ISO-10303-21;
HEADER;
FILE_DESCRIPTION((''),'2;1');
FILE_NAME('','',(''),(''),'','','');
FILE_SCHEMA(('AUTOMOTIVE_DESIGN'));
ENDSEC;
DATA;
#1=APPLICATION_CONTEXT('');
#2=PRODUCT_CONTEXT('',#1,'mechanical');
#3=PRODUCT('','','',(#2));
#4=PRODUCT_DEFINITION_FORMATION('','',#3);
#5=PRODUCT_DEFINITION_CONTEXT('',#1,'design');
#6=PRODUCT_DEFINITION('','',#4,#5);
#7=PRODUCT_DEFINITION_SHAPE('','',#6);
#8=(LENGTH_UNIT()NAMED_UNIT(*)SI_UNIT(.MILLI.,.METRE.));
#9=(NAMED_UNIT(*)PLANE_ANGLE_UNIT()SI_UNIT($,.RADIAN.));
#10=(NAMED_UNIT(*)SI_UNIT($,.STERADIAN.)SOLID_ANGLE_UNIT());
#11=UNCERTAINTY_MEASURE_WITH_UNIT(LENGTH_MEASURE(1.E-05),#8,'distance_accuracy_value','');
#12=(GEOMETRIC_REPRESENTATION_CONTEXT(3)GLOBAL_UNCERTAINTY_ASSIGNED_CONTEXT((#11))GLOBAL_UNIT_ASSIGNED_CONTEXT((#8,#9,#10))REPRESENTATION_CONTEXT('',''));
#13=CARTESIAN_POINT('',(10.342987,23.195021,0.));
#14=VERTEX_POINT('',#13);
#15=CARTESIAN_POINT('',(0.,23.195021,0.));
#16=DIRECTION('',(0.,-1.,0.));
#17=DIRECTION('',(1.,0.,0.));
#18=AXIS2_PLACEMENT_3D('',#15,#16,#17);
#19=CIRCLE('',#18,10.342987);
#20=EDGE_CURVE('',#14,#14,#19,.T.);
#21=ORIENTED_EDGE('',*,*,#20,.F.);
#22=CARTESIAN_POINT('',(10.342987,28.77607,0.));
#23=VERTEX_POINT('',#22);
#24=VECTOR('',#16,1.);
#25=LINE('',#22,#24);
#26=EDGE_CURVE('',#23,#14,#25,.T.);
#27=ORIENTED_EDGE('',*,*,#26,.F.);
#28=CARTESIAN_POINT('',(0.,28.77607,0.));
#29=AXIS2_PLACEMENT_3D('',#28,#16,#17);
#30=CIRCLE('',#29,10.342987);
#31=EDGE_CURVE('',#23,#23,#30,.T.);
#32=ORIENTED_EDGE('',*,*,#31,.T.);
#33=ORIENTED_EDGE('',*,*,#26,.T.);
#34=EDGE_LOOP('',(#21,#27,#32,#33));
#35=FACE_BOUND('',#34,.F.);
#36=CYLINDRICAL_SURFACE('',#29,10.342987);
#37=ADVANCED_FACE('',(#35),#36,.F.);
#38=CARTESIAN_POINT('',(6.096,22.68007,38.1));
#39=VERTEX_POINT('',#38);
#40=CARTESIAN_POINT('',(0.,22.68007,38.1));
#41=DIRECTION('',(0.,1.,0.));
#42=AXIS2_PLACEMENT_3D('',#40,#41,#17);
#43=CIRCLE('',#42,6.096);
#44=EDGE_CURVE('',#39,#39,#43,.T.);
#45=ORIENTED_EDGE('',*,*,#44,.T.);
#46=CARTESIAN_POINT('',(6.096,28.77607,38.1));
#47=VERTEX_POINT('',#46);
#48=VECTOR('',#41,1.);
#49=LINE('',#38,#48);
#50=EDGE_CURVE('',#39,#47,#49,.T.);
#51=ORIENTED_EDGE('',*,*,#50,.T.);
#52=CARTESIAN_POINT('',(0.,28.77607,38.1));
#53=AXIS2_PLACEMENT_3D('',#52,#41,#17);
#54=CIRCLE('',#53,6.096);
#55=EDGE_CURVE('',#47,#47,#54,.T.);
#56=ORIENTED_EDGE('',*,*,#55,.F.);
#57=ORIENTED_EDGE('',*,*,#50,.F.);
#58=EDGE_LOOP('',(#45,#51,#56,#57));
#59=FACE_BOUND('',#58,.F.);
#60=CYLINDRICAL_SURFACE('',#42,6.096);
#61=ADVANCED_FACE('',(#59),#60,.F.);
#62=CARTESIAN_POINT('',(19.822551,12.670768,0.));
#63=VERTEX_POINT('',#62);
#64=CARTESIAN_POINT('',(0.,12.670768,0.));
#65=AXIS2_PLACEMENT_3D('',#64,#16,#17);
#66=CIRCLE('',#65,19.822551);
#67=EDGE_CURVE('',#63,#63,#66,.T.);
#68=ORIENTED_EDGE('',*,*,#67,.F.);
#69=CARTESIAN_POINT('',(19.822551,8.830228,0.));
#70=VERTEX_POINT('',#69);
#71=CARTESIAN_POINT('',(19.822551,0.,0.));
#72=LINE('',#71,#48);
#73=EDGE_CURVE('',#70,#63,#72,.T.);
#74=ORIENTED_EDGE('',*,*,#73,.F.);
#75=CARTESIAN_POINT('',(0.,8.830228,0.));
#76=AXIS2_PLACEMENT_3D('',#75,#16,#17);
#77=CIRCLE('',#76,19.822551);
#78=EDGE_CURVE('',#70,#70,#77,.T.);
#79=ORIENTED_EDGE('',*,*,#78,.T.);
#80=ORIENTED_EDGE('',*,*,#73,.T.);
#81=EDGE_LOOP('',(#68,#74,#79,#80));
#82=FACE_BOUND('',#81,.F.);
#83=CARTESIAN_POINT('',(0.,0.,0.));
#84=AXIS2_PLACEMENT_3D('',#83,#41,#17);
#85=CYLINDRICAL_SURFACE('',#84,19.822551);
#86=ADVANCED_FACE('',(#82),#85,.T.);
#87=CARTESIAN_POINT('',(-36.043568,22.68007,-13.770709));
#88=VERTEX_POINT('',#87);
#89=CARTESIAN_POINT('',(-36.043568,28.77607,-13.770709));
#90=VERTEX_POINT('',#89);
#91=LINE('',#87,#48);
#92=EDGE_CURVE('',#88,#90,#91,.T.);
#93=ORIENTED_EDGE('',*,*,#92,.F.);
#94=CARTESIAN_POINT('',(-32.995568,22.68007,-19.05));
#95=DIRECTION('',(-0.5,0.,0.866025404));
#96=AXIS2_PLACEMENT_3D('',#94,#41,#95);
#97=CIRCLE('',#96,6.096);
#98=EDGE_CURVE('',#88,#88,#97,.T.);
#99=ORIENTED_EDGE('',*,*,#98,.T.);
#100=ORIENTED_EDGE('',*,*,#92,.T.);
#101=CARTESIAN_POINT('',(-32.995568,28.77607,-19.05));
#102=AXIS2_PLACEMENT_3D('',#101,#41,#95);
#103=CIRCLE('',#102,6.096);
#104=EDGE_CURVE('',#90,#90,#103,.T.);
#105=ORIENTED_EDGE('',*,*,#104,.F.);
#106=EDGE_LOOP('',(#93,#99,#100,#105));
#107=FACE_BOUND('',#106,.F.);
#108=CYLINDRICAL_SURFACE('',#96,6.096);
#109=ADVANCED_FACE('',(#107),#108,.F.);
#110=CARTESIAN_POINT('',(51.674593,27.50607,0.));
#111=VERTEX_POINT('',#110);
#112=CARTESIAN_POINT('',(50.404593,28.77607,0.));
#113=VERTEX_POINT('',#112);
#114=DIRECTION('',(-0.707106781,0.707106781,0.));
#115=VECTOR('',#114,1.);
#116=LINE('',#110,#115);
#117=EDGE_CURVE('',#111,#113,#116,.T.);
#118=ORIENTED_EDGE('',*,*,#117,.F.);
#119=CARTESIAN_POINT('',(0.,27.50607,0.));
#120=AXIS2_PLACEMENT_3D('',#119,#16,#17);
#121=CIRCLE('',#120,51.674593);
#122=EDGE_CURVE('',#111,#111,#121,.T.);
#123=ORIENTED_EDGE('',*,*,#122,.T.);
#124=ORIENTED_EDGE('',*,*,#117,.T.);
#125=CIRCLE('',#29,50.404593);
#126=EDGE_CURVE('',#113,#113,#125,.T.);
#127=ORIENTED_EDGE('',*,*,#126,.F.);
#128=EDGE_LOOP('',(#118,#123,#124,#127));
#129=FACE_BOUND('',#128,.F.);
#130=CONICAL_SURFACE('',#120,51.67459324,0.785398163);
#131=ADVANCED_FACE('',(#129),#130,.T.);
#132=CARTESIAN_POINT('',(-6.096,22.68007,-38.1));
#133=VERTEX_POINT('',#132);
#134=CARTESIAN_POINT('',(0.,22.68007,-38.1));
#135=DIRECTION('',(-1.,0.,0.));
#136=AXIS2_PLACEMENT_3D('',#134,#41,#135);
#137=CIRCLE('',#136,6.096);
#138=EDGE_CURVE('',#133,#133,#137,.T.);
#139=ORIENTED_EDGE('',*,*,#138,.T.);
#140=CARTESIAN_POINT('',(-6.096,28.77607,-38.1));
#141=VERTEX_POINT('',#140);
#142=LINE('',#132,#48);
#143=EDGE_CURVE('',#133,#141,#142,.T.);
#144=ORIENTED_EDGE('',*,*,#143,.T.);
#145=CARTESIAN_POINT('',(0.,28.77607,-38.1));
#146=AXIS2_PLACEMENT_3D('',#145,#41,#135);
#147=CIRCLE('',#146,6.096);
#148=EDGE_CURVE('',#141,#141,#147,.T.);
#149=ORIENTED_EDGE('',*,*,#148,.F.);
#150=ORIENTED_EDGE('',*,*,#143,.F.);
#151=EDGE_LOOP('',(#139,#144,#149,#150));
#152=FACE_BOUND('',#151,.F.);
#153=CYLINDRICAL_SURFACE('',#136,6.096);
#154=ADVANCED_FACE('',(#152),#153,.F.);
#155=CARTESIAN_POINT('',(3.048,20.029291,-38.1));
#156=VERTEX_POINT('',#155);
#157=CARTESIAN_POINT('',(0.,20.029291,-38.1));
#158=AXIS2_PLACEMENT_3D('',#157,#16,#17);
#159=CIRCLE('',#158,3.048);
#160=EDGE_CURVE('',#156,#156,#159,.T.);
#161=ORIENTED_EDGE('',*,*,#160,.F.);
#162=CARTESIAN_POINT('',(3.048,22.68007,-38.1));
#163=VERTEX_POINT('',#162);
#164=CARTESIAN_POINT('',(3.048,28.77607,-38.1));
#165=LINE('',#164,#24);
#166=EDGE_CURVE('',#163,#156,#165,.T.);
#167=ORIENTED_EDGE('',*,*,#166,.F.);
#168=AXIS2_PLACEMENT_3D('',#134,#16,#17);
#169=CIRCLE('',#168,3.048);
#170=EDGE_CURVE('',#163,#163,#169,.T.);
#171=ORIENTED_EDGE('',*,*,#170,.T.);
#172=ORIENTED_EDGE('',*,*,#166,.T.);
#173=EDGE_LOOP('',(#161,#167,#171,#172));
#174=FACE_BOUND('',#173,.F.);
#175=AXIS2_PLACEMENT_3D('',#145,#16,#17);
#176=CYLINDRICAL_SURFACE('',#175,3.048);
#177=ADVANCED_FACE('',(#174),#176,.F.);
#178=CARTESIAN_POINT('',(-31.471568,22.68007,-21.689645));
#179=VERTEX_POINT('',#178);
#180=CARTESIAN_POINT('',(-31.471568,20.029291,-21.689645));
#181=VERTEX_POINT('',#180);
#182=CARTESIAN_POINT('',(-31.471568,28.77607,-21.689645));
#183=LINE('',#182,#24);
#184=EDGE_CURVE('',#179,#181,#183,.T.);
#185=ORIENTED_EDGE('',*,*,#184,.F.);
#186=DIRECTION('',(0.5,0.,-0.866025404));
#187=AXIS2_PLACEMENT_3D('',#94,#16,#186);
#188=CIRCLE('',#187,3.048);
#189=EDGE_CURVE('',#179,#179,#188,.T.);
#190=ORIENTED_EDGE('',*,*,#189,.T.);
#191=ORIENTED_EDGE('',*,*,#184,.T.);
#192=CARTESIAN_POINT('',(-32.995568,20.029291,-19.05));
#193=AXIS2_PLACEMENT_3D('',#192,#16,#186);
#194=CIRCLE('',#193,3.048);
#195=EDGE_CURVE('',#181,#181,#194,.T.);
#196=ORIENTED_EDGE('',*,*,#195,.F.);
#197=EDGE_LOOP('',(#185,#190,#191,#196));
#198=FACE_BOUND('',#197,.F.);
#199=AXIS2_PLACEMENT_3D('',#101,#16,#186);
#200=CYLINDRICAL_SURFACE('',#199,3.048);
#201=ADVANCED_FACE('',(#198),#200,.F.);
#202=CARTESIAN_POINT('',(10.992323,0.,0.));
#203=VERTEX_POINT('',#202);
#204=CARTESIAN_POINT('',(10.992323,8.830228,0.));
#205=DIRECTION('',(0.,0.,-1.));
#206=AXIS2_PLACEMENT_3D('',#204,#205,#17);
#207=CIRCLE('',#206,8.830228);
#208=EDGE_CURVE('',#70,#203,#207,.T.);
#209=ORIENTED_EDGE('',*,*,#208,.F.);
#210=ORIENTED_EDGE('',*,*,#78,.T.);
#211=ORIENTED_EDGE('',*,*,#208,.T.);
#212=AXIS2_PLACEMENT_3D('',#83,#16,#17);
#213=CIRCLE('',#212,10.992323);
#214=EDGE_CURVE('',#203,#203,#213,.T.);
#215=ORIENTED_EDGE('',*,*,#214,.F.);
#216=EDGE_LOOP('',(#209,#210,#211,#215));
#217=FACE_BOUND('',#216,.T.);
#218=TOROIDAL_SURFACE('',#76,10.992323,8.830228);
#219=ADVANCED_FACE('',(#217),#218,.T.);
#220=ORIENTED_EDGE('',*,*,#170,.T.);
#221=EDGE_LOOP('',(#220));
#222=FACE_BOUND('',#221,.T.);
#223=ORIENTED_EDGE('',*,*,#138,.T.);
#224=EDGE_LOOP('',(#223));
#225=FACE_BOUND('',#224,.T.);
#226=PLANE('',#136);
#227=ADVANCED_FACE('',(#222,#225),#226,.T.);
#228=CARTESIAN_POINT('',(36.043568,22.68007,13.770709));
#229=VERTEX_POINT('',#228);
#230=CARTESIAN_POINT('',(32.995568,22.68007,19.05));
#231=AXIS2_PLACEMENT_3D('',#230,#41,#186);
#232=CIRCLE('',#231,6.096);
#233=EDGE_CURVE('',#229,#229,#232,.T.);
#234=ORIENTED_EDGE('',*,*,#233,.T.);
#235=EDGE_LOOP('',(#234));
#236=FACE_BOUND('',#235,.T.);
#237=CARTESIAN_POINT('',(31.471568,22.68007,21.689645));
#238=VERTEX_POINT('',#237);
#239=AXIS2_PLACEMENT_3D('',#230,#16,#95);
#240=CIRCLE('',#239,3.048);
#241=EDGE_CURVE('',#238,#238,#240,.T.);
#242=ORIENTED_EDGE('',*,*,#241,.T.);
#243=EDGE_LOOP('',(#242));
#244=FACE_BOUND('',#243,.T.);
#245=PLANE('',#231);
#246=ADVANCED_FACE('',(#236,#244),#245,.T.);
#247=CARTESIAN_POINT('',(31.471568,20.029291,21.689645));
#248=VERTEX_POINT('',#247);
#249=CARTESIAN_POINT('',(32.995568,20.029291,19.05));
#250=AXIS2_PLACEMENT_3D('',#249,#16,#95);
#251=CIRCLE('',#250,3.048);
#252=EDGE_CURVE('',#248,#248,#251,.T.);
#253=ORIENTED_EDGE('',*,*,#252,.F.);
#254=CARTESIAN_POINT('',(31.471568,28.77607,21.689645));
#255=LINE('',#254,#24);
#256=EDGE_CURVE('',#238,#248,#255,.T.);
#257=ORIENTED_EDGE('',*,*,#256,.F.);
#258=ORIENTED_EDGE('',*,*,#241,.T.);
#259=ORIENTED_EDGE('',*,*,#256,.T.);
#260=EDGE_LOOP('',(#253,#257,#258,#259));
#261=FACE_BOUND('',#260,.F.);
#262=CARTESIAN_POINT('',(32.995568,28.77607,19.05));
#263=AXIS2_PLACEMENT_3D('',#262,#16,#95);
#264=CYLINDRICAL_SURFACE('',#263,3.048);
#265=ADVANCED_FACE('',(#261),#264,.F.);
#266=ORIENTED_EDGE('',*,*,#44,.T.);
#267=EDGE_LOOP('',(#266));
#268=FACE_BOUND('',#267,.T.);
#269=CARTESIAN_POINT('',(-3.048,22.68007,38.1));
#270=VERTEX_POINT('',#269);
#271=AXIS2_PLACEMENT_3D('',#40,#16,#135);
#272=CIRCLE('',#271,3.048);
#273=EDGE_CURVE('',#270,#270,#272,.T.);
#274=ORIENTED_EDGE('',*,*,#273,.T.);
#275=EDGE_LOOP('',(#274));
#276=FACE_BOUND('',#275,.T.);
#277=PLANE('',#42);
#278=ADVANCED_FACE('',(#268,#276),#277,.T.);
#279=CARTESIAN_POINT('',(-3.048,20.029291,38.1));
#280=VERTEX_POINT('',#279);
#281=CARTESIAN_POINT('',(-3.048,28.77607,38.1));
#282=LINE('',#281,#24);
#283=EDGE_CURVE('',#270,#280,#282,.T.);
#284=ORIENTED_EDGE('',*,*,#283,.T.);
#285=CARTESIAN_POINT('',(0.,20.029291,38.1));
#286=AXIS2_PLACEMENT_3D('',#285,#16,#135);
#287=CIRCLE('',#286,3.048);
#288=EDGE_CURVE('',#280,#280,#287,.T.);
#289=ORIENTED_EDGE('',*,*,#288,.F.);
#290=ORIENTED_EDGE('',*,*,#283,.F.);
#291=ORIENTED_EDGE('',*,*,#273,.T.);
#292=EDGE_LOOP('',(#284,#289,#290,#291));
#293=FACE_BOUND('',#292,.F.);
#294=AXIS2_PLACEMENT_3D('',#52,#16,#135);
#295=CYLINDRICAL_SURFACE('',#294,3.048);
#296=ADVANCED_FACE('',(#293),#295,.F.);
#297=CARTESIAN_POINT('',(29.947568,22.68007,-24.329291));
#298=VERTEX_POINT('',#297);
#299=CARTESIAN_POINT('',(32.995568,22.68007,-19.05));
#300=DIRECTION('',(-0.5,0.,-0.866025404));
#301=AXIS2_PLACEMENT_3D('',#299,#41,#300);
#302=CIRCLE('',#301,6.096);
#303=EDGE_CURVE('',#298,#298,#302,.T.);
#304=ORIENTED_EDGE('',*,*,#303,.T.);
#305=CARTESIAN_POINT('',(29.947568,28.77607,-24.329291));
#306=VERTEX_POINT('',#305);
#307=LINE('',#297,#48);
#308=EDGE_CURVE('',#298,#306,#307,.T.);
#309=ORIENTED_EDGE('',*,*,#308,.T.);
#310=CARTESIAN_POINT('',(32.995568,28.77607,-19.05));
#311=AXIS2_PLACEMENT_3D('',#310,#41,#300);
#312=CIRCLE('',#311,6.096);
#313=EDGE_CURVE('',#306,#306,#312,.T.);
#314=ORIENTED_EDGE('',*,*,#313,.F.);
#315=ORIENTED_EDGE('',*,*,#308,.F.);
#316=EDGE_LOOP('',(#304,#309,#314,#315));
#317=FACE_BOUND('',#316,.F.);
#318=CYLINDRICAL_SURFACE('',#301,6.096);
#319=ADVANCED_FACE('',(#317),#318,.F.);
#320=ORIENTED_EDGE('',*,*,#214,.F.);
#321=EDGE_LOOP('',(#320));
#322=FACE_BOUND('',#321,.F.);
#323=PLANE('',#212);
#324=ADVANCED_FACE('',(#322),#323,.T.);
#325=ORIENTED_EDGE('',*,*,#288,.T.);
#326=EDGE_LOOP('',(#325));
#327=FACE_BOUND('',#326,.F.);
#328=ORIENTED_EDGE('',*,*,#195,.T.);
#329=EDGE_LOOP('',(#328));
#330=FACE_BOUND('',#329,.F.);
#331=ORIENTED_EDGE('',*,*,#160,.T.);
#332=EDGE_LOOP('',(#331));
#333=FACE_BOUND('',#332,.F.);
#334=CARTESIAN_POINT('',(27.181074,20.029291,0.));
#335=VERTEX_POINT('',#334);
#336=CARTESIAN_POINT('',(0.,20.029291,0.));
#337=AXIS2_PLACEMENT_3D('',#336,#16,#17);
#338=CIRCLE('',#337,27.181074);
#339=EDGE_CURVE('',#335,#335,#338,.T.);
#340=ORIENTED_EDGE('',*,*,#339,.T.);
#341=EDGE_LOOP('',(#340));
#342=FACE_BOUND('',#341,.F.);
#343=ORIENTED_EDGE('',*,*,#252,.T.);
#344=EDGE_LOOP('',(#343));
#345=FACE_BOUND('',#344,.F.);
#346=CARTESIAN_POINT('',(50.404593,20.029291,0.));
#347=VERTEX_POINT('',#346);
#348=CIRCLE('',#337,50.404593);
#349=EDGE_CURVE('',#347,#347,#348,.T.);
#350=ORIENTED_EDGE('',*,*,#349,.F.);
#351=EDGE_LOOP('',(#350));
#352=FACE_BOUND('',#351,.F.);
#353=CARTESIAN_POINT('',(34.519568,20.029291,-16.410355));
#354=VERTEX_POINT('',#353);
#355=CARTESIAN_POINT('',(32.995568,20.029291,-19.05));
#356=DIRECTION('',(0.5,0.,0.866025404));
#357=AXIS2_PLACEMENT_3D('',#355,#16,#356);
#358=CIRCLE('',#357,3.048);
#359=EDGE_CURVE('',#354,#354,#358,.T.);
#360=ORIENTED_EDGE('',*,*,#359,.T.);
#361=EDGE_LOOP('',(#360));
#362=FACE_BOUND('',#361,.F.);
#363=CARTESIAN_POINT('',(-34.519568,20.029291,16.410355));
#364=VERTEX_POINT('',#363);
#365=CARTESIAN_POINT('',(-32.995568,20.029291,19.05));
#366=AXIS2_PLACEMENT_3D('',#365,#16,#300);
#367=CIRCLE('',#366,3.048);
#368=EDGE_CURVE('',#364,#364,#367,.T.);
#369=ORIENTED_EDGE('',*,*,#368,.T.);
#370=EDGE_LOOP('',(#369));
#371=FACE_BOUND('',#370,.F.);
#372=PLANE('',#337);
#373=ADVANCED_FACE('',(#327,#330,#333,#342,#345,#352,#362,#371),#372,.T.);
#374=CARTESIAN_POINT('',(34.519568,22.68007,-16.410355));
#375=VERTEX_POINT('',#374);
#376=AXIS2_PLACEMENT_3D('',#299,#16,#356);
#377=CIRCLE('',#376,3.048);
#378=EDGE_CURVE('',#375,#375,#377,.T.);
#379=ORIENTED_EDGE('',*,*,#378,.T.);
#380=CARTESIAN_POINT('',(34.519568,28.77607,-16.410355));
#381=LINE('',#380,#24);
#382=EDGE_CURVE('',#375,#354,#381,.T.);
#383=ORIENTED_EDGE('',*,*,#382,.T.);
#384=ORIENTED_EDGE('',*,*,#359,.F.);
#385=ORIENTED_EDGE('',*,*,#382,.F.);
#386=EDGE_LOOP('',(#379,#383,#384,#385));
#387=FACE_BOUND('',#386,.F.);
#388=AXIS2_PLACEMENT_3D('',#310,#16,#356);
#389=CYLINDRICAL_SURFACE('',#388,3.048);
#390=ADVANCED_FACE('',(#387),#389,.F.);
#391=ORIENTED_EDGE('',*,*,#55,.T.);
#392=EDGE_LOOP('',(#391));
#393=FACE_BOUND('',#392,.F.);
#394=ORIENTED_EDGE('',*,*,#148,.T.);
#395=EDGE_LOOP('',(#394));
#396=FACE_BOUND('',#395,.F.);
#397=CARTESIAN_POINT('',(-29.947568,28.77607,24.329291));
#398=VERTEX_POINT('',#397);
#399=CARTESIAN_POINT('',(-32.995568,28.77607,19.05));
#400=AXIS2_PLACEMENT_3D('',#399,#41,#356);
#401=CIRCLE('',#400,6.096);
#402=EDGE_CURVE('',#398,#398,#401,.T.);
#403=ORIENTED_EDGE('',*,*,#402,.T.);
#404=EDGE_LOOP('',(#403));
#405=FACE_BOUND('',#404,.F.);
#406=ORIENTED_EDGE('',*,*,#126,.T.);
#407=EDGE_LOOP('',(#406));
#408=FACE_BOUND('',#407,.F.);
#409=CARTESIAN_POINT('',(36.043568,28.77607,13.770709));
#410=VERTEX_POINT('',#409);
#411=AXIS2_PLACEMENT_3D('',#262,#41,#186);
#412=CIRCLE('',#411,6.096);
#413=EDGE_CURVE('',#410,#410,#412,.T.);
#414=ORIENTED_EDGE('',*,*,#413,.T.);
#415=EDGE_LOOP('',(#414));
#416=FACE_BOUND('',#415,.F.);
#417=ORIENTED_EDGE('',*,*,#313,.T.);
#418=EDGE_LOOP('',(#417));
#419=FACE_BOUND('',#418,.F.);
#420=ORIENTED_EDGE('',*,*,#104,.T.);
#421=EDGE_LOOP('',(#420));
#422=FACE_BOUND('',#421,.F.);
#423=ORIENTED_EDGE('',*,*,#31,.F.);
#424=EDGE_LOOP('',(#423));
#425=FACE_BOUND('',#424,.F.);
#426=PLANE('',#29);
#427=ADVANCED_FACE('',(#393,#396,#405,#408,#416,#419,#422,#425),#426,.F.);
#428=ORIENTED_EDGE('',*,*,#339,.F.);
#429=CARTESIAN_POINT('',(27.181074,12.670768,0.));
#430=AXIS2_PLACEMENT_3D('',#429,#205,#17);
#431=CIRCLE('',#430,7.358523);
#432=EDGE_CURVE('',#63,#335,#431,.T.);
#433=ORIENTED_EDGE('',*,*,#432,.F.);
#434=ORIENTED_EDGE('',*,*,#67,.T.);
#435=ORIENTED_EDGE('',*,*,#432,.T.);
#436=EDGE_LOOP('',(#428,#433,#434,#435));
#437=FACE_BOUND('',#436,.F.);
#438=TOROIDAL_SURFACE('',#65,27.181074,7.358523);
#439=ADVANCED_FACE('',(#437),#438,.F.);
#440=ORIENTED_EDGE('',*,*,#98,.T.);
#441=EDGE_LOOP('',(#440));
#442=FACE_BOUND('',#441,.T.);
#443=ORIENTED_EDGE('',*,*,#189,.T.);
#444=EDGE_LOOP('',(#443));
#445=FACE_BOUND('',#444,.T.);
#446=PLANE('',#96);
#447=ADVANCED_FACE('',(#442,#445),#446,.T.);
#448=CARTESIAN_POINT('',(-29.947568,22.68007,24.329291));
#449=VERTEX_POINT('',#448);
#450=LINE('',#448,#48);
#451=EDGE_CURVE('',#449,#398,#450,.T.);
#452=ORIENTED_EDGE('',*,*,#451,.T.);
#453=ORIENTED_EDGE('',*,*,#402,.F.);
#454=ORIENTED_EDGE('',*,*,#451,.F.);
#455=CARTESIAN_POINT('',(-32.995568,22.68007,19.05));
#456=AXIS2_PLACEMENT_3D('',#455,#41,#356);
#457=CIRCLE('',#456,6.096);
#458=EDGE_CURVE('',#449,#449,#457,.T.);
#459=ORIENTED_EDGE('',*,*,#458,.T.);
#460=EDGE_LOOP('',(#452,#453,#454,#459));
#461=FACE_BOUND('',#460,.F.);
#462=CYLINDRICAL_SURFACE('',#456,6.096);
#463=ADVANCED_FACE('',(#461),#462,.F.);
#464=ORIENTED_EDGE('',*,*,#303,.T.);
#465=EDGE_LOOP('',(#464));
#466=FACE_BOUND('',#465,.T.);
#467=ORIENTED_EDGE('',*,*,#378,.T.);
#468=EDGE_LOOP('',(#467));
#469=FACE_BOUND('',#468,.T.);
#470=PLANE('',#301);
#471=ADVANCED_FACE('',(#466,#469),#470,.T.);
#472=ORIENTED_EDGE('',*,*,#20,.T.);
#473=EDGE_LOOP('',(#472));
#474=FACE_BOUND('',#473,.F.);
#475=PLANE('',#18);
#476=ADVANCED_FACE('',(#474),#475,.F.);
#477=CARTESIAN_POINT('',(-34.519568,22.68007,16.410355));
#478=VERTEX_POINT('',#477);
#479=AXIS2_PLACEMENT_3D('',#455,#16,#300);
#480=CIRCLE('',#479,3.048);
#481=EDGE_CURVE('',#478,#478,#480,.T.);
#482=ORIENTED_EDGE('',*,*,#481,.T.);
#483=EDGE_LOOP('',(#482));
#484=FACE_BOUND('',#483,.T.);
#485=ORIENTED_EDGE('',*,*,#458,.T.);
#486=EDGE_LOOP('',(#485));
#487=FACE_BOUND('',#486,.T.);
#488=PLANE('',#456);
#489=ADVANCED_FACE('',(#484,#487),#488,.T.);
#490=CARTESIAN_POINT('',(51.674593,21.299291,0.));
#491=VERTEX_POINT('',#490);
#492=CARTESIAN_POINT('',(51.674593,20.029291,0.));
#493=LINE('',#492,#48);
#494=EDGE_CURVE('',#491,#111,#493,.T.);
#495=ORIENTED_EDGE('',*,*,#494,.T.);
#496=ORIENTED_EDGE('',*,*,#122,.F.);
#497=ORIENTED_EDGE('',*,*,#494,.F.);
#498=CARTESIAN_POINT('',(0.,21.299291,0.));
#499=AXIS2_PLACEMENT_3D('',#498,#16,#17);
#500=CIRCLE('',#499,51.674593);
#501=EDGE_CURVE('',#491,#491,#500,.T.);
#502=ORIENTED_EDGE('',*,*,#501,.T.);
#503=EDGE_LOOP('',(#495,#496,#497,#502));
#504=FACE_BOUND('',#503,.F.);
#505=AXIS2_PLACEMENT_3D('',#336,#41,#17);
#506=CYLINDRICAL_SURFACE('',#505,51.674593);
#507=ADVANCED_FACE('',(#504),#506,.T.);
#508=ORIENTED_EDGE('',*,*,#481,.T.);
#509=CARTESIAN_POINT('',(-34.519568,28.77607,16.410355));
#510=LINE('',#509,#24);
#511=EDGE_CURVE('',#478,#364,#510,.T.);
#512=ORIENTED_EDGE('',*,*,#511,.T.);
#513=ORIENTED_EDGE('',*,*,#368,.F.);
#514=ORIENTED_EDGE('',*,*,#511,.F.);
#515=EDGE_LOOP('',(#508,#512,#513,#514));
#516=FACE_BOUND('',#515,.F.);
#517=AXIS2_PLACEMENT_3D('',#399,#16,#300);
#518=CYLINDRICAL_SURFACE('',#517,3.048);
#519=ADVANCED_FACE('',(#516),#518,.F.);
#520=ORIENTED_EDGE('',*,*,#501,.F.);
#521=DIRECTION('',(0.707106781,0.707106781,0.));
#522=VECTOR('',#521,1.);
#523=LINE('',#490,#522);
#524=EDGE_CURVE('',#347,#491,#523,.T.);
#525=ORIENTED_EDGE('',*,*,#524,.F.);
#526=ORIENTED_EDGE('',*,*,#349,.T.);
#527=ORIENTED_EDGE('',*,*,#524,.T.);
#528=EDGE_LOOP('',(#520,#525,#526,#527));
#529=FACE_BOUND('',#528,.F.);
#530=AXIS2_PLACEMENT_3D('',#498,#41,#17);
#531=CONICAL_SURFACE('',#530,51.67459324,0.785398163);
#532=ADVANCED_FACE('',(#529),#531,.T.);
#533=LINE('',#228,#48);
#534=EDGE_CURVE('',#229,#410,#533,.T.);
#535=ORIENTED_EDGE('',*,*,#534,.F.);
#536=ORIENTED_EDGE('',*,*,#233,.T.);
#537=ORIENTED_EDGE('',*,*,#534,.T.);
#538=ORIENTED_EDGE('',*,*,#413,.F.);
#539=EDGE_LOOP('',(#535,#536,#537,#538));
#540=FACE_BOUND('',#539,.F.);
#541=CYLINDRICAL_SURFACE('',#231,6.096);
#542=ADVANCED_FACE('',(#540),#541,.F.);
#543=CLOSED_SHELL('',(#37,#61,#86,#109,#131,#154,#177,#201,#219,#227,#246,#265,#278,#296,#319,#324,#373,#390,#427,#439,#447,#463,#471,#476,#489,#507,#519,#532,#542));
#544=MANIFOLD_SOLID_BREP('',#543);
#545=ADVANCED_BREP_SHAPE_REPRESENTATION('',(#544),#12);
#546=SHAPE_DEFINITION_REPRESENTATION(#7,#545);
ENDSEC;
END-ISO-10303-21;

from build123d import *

# Parameters (mm, degrees)
F4_D            = 6.096
F4_CBORE_D      = 12.192
F4_CBORE_DEPTH  = 6.096
F4_COPIES_COUNT = 6
F5_R            = 7.3585229381
F6_R            = 8.8302275257
F7_SIZE         = 1.27


# Not quite as in the source:
# - a pattern or mirror of a feature is missing from the dataset's text; its kind, count and spacing are read off the source's solid


with BuildPart() as f2:
    # F1 (on Top) → F2 (revolve)
    with BuildSketch(Plane.XY):
        Polygon((0, 23.1950208545), (0, 0), (19.8225509375, 0), (19.8225509375, 20.0292905793), (51.67459324, 20.0292905793), (51.67459324, 28.776070103), (10.3429872543, 28.776070103), (10.3429872543, 23.1950208545), align=None)
    revolve(axis=Axis((0, 11.5975104272, 0), (0, -1, 0)))

    # F4 (through all)
    with Locations(Plane(origin=(0, 28.776070103, 0), x_dir=(-1, 0, 0), z_dir=(0, 1, 0))):
        with Locations((0, -38.1)):
            f4 = CounterBoreHole(F4_D / 2, F4_CBORE_D / 2, F4_CBORE_DEPTH)

    # F4_copies: F4 ×6 about axis
    f4_copies_axis = Axis((0, 0, 0), (0, 1, 0))
    for i in range(1, F4_COPIES_COUNT):
        add(f4.rotate(f4_copies_axis, i * 360 / F4_COPIES_COUNT), mode=Mode.SUBTRACT)

    # F5
    f5_edges = [f2.edges().sort_by_distance(p)[0] for p in [
        (-19.822551, 20.029291, 0),
    ]]
    fillet(f5_edges, radius=F5_R)

    # F6
    f6_edges = [f2.edges().sort_by_distance(p)[0] for p in [
        (-19.822551, 0, 0),
    ]]
    fillet(f6_edges, radius=F6_R)

    # F7
    f7_edges = [f2.edges().sort_by_distance(p)[0] for p in [
        (-51.674593, 20.029291, 0),
        (-51.674593, 28.77607, 0),
    ]]
    chamfer(f7_edges, length=F7_SIZE)


solid = f2.part
